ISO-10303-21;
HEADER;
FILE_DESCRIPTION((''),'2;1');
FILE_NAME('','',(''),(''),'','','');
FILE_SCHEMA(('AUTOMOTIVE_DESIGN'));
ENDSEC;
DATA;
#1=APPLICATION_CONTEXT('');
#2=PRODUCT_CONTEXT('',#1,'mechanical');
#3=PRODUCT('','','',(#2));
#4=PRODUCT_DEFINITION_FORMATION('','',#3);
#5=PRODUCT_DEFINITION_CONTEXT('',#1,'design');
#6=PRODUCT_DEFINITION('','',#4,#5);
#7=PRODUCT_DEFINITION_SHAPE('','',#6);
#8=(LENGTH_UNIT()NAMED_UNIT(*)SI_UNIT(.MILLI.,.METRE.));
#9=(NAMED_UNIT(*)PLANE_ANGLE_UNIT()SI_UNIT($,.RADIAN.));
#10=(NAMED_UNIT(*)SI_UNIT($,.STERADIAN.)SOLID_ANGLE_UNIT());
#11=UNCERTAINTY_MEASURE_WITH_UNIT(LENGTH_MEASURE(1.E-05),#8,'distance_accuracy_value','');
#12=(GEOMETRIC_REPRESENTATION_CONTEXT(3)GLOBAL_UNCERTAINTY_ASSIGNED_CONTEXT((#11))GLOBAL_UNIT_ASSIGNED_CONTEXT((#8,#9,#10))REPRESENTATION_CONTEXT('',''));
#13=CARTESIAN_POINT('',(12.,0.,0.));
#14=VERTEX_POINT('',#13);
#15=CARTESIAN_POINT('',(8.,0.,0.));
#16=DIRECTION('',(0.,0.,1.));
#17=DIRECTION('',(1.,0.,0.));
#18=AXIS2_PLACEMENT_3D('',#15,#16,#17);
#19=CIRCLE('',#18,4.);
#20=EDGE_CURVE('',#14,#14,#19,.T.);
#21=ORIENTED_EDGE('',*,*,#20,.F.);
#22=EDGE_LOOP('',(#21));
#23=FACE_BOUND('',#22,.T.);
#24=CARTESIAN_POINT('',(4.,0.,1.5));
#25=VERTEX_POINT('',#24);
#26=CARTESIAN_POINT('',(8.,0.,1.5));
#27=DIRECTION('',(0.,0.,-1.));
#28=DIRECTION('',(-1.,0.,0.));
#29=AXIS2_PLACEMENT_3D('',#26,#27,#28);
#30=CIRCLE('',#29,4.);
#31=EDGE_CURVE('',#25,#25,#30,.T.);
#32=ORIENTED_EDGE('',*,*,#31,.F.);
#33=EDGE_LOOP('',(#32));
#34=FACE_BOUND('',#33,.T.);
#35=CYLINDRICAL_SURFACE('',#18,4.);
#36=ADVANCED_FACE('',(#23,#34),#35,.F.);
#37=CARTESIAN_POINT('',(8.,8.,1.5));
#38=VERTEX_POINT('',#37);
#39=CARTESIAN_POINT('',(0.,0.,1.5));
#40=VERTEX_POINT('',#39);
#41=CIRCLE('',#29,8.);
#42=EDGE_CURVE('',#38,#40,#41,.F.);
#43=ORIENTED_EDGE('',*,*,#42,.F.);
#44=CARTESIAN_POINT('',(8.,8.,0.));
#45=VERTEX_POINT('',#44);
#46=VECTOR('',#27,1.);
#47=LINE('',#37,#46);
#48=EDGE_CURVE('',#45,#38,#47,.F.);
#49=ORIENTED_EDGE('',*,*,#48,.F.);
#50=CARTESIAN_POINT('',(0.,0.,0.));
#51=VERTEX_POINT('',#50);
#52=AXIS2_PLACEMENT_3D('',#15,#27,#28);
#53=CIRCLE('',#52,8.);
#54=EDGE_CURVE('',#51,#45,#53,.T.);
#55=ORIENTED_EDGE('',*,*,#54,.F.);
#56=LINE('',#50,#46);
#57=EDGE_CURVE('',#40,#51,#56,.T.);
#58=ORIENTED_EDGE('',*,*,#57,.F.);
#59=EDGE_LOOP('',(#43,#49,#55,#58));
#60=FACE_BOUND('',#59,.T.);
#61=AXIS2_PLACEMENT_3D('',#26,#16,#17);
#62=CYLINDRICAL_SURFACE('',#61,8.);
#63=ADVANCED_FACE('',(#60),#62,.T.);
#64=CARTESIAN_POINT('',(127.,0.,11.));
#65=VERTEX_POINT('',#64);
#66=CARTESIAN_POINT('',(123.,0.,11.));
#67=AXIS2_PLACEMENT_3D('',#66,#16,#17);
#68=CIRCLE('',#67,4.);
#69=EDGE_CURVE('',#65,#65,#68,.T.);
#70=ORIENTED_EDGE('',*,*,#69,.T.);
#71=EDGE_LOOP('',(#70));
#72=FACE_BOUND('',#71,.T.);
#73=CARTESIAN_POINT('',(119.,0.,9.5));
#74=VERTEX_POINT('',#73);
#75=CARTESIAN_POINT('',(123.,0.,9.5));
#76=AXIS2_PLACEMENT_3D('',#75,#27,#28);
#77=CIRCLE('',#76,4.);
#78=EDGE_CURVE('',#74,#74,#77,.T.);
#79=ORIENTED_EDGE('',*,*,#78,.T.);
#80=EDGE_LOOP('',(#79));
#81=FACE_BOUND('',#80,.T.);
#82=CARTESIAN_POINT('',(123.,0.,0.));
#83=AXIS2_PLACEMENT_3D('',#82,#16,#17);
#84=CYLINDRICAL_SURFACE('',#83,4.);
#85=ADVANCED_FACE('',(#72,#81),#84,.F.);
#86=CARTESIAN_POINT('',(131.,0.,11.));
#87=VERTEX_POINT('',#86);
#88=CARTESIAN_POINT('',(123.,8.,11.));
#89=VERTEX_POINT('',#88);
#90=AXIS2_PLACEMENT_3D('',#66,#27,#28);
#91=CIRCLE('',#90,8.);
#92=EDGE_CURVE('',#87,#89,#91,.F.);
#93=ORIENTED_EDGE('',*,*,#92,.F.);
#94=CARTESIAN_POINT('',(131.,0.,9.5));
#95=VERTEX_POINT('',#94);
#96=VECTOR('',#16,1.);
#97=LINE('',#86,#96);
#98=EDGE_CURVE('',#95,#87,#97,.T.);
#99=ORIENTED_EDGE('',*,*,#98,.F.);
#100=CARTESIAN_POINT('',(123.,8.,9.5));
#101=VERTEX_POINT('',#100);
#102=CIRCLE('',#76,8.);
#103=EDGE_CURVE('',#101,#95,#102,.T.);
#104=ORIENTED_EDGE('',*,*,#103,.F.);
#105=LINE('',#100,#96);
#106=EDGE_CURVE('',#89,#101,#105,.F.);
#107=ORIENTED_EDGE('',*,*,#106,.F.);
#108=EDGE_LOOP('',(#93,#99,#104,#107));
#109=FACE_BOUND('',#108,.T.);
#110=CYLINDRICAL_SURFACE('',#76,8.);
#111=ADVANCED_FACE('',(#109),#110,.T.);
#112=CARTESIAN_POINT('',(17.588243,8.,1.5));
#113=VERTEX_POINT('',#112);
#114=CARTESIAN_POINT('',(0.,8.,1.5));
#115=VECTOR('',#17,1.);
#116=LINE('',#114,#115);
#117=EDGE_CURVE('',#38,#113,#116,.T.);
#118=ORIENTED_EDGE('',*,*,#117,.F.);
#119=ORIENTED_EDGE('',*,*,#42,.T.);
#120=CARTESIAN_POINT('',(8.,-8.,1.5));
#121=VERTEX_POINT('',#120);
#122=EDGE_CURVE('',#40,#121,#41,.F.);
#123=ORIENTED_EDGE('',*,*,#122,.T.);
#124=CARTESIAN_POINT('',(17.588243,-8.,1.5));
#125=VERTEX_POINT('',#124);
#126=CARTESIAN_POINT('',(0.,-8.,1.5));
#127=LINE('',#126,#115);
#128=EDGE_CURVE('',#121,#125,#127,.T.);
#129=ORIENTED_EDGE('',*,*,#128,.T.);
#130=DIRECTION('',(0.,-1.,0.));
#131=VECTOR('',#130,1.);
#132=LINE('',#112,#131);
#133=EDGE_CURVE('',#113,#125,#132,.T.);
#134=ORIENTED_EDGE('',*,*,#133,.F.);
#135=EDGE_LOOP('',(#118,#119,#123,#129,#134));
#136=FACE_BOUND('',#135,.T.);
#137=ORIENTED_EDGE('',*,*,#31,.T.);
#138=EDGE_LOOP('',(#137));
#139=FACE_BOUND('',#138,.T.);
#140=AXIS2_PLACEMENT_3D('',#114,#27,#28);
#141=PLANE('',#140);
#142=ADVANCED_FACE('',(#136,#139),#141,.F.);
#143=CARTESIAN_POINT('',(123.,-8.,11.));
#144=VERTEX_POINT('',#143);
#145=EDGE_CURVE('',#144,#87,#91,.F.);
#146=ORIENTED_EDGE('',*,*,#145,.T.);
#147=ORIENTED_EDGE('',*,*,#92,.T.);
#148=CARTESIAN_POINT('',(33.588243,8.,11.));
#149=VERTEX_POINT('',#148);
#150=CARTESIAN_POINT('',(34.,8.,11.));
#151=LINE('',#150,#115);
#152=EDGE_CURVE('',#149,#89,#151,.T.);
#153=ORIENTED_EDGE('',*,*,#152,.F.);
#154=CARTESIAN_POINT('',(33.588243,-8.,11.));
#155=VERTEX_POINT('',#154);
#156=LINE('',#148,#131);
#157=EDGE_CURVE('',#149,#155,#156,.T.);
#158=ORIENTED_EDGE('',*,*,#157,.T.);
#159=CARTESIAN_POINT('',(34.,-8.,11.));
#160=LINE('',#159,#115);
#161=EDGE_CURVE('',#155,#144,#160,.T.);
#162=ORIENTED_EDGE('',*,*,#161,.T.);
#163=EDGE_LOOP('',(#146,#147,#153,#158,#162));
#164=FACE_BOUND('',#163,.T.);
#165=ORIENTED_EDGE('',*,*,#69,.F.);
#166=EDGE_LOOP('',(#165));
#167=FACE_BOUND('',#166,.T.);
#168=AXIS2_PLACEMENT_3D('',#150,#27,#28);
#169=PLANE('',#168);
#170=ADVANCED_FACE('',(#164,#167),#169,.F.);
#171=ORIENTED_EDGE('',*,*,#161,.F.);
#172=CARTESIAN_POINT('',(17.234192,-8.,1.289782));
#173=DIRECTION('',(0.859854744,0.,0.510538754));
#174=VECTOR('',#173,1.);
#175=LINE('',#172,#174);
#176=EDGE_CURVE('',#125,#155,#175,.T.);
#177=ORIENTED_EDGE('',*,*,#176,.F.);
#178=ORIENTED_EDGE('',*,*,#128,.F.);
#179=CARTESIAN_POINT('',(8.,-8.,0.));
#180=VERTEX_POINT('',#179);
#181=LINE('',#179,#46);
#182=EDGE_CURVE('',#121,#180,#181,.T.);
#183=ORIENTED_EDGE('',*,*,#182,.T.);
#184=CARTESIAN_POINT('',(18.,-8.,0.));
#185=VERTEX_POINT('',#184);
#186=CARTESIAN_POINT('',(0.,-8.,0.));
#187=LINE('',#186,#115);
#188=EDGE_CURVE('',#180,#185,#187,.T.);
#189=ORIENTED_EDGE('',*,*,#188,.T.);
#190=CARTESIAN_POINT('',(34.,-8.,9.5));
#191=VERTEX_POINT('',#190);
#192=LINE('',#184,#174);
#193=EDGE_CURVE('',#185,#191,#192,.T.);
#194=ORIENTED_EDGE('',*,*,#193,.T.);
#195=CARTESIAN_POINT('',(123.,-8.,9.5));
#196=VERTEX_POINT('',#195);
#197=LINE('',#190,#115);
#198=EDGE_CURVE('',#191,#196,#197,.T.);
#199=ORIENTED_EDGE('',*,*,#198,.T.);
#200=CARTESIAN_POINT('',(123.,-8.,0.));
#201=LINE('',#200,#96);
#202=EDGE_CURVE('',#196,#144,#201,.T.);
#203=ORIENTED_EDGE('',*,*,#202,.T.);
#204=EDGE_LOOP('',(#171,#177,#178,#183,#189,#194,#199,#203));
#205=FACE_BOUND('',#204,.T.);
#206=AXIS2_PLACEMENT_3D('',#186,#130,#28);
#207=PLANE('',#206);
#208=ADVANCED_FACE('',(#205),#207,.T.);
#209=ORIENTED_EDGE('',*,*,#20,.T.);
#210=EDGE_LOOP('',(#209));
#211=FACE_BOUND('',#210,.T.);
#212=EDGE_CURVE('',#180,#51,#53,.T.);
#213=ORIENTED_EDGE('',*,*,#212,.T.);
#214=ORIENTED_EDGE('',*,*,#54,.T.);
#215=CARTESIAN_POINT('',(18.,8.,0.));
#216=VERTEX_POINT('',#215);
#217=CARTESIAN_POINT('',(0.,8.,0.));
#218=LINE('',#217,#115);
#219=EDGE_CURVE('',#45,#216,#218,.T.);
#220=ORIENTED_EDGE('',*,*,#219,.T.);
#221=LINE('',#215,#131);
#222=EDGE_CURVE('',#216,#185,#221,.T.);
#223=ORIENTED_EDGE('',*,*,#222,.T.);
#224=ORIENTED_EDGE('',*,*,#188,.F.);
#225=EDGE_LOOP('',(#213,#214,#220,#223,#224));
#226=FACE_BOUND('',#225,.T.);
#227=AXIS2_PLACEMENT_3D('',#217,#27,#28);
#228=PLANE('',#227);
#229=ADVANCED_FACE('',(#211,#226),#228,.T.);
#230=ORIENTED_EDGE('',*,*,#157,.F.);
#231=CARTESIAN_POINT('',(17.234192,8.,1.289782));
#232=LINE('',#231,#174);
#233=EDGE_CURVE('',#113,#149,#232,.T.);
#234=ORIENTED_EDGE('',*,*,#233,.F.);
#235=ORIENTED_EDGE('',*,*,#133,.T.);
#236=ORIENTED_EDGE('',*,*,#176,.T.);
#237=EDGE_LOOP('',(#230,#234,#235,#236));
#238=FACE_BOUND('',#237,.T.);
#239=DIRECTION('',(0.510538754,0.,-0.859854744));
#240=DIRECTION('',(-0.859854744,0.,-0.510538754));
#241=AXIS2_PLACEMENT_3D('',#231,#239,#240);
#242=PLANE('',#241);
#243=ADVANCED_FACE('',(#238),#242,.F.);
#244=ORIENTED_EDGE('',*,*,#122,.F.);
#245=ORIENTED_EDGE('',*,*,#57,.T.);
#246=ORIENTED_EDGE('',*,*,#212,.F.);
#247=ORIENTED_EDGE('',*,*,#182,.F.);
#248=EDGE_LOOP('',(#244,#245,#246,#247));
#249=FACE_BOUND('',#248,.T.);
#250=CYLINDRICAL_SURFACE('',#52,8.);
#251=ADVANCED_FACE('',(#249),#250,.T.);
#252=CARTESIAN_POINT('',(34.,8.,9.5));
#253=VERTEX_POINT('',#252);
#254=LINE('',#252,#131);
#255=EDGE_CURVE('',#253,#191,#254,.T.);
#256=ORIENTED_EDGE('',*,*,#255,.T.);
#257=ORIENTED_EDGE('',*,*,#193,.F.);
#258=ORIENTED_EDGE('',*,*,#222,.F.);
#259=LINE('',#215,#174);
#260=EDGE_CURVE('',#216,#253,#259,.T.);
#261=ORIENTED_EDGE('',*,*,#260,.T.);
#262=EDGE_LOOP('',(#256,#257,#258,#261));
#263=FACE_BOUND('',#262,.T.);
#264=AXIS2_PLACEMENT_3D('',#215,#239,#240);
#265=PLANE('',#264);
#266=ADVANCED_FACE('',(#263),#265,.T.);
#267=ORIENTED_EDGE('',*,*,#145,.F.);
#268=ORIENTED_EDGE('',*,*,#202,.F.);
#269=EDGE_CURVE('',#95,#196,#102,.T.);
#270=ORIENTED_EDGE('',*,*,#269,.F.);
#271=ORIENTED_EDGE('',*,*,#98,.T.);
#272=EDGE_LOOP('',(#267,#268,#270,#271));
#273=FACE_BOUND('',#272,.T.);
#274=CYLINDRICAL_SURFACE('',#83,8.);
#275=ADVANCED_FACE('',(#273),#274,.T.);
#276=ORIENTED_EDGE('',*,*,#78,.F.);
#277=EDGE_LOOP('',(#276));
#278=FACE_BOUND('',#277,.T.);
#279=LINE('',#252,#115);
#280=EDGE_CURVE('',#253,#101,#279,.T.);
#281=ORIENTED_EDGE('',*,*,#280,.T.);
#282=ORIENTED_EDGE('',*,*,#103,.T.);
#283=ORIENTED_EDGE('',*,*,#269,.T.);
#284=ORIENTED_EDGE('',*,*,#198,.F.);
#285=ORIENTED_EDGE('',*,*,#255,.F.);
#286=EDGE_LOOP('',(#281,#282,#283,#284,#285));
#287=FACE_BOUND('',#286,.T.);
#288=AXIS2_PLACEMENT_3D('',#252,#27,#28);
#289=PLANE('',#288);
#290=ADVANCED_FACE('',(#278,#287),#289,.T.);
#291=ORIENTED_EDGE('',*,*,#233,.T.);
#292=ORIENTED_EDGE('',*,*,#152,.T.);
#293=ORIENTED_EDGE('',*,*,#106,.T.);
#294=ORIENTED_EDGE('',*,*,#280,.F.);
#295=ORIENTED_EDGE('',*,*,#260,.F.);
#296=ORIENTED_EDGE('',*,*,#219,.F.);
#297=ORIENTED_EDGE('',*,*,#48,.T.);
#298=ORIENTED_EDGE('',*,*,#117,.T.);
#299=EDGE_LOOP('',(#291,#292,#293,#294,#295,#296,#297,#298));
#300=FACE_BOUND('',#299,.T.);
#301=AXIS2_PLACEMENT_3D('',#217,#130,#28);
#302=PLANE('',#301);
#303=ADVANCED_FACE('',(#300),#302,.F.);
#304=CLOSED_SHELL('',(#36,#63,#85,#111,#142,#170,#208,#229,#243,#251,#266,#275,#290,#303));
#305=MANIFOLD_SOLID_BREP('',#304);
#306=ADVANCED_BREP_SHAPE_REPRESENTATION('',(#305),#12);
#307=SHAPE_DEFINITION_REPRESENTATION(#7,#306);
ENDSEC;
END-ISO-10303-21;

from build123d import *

# Parameters (mm, degrees)
EXTRUDE_1_DEPTH          = 8
FILLET_1_R               = 8
CUT_EXTRUDE_1_DEPTH      = 132.587423411
CUT_EXTRUDE_1_DEPTH_BACK = 132.587423411
SKETCH_2_R               = 4


with BuildPart() as part:
    # 草图1 → 拉伸-薄壁1 (new, symmetric)
    with BuildSketch(Plane(origin=(0, 0, 0), x_dir=(1, 0, 0), z_dir=(0, 1, 0))):
        Polygon((0, 0), (18, 0), (34, -9.5), (131, -9.5), (131, -11), (33.588243042, -11), (17.588243042, -1.5), (0, -1.5), align=None)
    extrude(amount=EXTRUDE_1_DEPTH, both=True)

    # 圆角1
    fillet_1_edges = [part.edges().sort_by_distance(p)[0] for p in [
        (131, -8, 10.25),
        (131, 8, 10.25),
        (0, -8, 0.75),
        (0, 8, 0.75),
    ]]
    fillet(fillet_1_edges, radius=FILLET_1_R - 0.0001)  # a hair under: the kernel refuses the full size

    # 草图2 → 切除-拉伸1 (cut, two sides: drawn at the far end of the back side and taken through both)
    with BuildSketch(Plane.XY.offset(1.5).offset(-CUT_EXTRUDE_1_DEPTH_BACK)):
        with Locations((8, 0)):
            Circle(SKETCH_2_R)
        with Locations((123, 0)):
            Circle(SKETCH_2_R)
    extrude(amount=CUT_EXTRUDE_1_DEPTH + CUT_EXTRUDE_1_DEPTH_BACK, mode=Mode.SUBTRACT)


solid = part.part
